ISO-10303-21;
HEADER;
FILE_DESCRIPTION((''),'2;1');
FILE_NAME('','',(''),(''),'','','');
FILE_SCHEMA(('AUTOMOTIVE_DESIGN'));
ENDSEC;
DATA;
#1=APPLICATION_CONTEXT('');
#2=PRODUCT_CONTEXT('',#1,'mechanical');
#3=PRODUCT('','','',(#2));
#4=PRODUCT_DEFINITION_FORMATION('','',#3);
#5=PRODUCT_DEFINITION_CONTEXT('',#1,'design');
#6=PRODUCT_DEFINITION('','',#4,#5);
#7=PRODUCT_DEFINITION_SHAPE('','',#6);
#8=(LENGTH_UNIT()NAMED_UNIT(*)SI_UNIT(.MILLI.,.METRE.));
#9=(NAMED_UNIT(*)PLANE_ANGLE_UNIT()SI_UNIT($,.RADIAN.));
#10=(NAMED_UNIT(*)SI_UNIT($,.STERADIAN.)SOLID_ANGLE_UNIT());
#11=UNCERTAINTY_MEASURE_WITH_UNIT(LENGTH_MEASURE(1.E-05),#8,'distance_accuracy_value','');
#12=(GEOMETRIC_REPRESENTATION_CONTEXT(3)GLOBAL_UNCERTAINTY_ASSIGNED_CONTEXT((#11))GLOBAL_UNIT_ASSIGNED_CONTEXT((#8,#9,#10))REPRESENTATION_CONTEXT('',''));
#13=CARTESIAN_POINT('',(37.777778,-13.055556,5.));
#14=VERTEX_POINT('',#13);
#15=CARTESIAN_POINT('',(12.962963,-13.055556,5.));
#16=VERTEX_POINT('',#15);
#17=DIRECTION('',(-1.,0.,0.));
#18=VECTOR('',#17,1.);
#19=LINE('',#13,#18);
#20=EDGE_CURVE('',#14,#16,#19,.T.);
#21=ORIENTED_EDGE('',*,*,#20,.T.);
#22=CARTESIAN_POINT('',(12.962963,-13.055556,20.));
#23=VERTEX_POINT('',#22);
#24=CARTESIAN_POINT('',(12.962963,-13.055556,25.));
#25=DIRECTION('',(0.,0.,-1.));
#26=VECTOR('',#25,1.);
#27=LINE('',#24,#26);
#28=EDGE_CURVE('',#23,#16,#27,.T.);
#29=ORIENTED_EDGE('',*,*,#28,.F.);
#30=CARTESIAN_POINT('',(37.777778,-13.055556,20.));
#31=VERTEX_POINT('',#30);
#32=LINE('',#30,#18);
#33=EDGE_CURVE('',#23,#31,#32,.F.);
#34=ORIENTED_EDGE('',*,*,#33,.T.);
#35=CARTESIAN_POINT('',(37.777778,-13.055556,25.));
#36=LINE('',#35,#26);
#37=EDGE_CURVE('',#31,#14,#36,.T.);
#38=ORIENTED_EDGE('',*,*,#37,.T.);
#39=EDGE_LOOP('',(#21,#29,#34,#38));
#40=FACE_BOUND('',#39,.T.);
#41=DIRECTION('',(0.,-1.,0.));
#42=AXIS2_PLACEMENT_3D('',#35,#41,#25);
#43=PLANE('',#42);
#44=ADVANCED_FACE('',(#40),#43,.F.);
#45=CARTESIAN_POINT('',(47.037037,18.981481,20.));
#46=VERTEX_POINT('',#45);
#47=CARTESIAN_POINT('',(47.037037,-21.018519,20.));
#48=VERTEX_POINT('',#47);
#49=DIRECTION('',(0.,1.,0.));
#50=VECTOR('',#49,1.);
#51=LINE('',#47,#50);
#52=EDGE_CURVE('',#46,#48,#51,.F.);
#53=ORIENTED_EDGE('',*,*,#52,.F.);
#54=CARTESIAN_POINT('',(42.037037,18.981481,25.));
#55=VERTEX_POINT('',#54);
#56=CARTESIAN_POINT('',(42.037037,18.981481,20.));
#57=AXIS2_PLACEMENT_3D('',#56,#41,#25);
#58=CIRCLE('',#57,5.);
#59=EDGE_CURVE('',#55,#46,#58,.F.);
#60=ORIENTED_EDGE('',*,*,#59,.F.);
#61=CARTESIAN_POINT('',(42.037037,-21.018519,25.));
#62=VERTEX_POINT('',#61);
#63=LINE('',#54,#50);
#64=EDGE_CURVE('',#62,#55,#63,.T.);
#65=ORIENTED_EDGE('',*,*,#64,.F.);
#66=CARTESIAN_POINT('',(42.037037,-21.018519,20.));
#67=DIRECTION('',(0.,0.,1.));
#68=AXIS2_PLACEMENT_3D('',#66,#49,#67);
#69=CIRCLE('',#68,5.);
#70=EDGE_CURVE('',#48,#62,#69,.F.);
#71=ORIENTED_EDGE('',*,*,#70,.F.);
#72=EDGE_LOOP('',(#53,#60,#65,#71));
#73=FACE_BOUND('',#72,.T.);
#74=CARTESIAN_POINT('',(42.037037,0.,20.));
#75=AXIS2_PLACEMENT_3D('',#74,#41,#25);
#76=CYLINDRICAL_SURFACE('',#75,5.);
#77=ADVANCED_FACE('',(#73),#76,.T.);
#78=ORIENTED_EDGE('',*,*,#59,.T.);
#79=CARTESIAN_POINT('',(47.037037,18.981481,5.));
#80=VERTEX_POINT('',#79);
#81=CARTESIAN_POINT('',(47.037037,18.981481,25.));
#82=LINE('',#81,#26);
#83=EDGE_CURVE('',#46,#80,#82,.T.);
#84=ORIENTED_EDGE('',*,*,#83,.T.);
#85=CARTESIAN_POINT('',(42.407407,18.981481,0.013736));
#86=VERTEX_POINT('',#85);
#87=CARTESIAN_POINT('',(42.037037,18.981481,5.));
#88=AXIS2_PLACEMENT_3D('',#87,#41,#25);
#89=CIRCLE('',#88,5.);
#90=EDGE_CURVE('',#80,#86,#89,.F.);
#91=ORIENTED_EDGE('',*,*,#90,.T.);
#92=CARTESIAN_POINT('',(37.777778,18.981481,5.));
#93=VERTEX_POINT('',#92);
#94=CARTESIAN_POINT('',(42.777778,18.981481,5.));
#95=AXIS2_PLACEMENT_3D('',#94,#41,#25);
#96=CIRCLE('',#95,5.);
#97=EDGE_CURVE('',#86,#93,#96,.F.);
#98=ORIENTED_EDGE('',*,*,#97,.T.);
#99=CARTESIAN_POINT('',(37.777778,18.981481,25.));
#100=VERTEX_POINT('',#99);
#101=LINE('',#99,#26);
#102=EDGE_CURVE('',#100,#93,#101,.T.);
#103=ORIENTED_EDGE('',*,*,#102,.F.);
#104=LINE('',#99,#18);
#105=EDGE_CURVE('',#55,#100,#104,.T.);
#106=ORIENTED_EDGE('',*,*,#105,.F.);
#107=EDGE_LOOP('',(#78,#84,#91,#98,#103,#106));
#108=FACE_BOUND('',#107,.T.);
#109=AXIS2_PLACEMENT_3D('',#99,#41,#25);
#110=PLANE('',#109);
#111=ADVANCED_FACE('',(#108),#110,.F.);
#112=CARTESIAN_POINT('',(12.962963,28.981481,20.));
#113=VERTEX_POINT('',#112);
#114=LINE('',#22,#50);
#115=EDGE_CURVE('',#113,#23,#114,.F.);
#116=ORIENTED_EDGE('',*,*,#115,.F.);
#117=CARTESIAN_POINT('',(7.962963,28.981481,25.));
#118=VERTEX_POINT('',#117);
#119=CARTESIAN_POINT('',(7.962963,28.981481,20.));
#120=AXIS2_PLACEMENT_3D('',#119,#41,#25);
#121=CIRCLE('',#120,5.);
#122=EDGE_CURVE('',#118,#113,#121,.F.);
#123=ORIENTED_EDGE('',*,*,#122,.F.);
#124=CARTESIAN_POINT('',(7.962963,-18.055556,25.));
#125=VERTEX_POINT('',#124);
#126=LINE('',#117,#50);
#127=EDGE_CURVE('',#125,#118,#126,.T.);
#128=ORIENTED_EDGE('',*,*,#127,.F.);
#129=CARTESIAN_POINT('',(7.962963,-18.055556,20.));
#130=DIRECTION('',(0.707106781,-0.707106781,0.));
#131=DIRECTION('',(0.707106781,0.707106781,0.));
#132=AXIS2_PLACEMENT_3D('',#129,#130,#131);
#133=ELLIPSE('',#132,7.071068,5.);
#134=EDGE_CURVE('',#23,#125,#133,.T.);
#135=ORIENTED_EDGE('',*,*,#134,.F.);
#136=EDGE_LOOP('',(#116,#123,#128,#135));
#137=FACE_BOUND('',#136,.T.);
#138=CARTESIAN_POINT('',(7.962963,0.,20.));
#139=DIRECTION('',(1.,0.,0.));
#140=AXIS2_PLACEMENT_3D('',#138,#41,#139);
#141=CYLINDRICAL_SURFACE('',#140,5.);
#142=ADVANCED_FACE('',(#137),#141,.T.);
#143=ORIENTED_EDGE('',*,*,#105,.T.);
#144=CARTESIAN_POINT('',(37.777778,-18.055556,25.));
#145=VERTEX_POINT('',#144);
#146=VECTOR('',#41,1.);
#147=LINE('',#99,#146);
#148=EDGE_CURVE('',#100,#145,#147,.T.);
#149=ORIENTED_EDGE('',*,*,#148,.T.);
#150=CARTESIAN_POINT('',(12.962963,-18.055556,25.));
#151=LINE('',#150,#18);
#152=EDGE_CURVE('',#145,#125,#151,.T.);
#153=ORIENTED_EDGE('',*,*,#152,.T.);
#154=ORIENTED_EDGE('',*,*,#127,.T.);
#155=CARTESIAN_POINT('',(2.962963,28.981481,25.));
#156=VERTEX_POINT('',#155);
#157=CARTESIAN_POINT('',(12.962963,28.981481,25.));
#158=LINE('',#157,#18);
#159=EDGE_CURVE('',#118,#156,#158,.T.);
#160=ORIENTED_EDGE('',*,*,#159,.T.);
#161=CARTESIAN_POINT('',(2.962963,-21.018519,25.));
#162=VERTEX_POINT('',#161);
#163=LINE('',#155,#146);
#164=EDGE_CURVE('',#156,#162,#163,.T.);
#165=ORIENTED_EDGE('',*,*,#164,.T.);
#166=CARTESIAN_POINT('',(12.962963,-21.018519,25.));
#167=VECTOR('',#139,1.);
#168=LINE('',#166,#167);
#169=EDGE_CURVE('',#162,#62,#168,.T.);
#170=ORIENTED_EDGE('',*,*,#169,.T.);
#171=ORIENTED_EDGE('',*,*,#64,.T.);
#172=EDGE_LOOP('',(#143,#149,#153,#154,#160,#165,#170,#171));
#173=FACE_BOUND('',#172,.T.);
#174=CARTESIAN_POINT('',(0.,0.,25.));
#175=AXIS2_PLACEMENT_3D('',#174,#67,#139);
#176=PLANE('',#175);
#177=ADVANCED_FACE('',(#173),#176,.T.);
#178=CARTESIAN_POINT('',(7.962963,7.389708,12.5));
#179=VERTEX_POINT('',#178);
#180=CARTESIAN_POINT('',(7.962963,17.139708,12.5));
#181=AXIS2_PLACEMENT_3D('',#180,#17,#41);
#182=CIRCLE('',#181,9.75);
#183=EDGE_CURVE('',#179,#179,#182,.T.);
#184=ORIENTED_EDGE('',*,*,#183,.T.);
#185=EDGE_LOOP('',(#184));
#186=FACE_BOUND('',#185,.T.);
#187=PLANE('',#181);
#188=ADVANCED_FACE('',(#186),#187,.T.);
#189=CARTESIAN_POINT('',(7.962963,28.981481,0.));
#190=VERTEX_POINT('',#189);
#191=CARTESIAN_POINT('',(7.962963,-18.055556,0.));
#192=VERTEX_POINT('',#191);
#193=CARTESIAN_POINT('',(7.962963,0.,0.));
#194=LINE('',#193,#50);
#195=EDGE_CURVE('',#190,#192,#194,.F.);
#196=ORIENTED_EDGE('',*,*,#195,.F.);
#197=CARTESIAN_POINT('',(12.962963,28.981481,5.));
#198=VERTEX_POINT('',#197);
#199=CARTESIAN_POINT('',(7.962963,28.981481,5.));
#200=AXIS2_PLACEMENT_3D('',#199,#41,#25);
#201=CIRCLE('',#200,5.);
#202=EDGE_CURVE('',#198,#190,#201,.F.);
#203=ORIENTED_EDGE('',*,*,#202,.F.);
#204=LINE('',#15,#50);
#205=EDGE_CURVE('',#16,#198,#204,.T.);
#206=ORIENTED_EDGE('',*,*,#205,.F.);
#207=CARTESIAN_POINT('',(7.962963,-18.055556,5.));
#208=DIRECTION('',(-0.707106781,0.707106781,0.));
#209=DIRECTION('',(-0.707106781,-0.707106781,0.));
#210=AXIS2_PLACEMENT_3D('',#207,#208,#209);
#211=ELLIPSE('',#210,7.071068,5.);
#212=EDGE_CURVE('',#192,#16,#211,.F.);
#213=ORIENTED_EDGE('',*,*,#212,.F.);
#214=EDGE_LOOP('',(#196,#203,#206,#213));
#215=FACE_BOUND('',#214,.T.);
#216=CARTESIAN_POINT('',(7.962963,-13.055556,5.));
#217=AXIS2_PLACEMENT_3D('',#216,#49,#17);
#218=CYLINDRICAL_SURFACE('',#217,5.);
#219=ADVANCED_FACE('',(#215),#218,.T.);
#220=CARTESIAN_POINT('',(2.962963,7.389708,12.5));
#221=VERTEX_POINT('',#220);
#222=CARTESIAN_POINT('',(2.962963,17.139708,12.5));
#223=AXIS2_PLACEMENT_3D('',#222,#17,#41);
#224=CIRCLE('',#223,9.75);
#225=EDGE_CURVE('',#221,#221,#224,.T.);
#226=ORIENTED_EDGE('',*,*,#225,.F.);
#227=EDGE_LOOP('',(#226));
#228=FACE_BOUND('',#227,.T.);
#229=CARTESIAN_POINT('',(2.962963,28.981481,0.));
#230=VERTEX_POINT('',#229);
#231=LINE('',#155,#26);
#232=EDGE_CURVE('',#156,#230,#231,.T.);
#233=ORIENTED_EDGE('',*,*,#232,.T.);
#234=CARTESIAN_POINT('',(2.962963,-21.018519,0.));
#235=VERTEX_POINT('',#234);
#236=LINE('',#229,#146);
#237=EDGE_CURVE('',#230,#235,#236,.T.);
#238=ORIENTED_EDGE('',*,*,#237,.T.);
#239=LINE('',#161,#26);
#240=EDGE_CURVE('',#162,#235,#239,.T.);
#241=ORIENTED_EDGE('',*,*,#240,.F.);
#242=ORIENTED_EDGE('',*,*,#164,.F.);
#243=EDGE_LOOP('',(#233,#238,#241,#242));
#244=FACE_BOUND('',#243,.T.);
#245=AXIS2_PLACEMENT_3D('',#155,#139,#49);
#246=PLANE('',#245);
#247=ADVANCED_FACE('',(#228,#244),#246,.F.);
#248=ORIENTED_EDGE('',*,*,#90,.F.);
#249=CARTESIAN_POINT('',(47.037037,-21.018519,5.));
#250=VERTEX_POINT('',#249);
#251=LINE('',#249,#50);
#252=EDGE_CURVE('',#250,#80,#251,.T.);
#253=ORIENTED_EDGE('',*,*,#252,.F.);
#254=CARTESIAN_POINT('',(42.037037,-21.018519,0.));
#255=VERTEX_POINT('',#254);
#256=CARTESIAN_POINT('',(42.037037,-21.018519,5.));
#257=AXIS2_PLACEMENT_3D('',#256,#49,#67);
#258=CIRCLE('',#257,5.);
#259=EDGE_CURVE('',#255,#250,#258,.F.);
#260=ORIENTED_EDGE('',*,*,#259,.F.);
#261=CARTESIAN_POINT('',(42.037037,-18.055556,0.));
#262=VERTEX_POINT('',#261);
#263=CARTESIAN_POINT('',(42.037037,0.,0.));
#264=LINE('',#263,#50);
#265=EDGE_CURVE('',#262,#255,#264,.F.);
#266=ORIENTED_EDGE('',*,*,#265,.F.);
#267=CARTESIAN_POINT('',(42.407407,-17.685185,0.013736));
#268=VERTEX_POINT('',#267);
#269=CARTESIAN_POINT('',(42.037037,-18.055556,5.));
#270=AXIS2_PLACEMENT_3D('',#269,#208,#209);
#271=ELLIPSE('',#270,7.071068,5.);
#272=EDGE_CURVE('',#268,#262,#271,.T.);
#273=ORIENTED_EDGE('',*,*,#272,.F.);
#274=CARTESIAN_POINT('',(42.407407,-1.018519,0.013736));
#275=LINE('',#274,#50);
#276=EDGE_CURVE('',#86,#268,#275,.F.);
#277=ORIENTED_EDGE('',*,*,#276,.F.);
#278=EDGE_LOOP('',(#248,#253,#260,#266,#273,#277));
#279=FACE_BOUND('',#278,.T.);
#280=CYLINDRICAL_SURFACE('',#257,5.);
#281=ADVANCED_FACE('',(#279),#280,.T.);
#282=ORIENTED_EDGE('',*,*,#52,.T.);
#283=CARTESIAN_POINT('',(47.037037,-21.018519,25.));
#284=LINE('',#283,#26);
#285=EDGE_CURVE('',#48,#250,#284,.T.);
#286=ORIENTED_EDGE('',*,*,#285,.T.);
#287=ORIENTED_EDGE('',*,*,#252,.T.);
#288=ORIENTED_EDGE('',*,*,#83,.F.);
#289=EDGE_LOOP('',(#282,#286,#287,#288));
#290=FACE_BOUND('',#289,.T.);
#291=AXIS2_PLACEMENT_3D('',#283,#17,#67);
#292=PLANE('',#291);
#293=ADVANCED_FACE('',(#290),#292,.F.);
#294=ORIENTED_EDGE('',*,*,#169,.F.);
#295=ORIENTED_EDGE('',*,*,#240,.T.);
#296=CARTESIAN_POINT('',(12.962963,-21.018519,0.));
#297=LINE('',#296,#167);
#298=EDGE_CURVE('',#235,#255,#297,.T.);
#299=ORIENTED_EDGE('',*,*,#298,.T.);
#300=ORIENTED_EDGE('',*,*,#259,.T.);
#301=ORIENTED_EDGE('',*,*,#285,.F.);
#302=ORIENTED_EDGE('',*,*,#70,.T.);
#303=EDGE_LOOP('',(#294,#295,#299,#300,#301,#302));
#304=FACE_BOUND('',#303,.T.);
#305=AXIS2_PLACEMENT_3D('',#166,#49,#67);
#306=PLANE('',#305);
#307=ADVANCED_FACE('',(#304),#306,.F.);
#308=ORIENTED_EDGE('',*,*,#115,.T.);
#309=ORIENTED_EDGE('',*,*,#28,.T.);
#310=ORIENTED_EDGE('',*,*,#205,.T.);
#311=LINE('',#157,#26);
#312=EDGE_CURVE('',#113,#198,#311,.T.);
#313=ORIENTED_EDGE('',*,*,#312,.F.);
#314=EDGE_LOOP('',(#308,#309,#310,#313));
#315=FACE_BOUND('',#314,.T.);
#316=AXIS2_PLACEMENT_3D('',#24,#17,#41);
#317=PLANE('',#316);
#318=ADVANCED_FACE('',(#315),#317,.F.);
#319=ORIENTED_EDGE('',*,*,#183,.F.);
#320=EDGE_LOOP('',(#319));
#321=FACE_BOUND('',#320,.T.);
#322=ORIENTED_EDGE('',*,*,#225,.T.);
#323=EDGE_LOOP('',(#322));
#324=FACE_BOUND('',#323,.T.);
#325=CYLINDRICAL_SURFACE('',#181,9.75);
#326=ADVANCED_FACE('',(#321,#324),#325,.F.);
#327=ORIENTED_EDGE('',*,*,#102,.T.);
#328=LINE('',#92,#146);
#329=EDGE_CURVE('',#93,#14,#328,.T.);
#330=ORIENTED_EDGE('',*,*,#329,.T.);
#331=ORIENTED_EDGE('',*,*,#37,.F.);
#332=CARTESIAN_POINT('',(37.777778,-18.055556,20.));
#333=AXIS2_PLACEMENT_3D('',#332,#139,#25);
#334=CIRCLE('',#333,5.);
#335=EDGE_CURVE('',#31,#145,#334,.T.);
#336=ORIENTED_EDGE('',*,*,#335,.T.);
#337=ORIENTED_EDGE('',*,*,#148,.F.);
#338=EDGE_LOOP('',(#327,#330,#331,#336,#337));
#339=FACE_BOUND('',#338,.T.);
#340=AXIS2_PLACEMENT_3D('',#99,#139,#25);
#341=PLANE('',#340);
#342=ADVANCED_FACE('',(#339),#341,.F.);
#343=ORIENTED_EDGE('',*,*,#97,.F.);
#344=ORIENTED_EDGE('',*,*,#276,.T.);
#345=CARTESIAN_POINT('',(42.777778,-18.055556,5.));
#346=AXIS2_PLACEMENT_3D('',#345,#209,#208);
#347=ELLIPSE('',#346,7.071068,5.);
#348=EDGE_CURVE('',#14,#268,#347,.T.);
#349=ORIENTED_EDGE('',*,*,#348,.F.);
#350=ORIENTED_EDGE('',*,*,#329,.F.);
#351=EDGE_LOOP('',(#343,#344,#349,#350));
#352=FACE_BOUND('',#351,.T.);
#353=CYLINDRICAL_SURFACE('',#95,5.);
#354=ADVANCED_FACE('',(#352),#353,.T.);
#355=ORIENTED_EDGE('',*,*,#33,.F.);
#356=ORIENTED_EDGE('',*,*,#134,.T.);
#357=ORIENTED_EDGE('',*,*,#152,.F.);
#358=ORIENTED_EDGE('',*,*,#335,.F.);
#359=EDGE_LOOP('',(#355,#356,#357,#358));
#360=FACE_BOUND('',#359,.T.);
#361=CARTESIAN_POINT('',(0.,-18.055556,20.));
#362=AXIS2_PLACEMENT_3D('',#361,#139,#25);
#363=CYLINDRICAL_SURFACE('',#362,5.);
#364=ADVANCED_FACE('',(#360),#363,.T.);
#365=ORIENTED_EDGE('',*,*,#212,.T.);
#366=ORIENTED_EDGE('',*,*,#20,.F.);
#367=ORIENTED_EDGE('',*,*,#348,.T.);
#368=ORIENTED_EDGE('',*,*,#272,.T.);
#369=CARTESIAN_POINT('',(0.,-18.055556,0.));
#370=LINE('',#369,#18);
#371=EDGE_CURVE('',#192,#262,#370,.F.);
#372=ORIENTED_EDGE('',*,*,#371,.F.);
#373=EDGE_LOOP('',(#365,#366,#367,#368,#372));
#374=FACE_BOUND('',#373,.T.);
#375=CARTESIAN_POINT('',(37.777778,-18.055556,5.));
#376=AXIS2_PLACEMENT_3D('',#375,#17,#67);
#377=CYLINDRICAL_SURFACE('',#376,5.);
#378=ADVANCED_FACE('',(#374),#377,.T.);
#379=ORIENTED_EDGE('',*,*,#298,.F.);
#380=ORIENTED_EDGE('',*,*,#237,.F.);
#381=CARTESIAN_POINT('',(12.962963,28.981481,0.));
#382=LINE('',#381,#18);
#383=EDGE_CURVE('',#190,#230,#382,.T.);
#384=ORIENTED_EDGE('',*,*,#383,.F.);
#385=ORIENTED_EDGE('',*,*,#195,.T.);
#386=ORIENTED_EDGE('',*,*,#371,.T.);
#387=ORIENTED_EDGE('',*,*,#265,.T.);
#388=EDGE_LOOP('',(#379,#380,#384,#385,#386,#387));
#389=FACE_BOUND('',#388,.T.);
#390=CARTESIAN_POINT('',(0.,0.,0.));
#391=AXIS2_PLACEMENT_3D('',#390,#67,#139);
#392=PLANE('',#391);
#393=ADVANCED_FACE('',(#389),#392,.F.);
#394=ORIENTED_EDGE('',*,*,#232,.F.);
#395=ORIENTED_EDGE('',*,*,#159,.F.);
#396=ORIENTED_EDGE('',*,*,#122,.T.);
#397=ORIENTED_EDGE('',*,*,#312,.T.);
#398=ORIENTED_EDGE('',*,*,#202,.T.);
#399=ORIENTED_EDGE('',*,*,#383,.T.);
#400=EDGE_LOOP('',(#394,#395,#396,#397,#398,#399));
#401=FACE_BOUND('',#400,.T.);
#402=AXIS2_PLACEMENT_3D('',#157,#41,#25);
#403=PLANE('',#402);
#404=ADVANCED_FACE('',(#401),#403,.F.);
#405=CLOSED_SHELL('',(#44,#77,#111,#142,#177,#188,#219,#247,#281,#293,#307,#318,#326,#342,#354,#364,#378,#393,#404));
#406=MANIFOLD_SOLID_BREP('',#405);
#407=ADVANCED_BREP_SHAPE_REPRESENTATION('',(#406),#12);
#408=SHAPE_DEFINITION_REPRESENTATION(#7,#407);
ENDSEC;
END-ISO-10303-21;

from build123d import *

# Parameters (mm, degrees)
EXTRUDE_1_DEPTH     = 25
SKETCH_2_R          = 9.75
CUT_EXTRUDE_1_DEPTH = 5
FILLET_2_R          = 5


with BuildPart() as part:
    # 草圖1 → 填料-伸長1 (new body)
    with BuildSketch(Plane.XY):
        Polygon((12.962962963, -21.018518519), (47.037037037, -21.018518519), (47.037037037, 18.981481481), (37.777777778, 18.981481481), (37.777777778, -13.055555556), (12.962962963, -13.055555556), (12.962962963, 28.981481481), (2.962962963, 28.981481481), (2.962962963, -21.018518519), align=None)
    extrude(amount=EXTRUDE_1_DEPTH)

    # 草圖2 → 除料-伸長1 (cut)
    with BuildSketch(Plane.ZY.offset(-2.962962963)):
        with Locations(Location((12.5, 17.139708428, 0), (0, 0, 270))):
            Circle(SKETCH_2_R)
    extrude(amount=-CUT_EXTRUDE_1_DEPTH, mode=Mode.SUBTRACT)

    # 圓角2
    # the kernel refuses this fillet: 5 mm, written as the material it takes off along each edge
    with BuildSketch(Plane(origin=(47.037037037, -33.518518519, 25), x_dir=(0, 0, -1), z_dir=(0, 1, 0))) as fillet_2_piece_1:
        with BuildLine():
            CenterArc((FILLET_2_R, FILLET_2_R), FILLET_2_R, 180, 90)
            Line((0, FILLET_2_R), (0, 0))
            Line((0, 0), (FILLET_2_R, 0))
        make_face()
    extrude(amount=65, mode=Mode.SUBTRACT)
    with BuildSketch(Plane(origin=(47.037037037, -33.518518519, 0), x_dir=(0, 0, 1), z_dir=(0, 1, 0))) as fillet_2_piece_2:
        with BuildLine():
            CenterArc((FILLET_2_R, -FILLET_2_R), FILLET_2_R, 90, 90)
            Line((0, -FILLET_2_R), (0, 0))
            Line((0, 0), (FILLET_2_R, 0))
        make_face()
    extrude(amount=65, mode=Mode.SUBTRACT)
    with BuildSketch(Plane(origin=(37.777777778, 31.481481481, 0), x_dir=(1, 0, 0), z_dir=(0, -1, 0))) as fillet_2_piece_3:
        with BuildLine():
            CenterArc((FILLET_2_R, FILLET_2_R), FILLET_2_R, 180, 90)
            Line((0, FILLET_2_R), (0, 0))
            Line((0, 0), (FILLET_2_R, 0))
        make_face()
    extrude(amount=44.537037037, mode=Mode.SUBTRACT)
    with BuildSketch(Plane(origin=(12.962962963, -13.055555556, 25), x_dir=(-1, 0, 0), z_dir=(0, 1, 0))) as fillet_2_piece_4:
        with BuildLine():
            CenterArc((FILLET_2_R, -FILLET_2_R), FILLET_2_R, 90, 90)
            Line((0, -FILLET_2_R), (0, 0))
            Line((0, 0), (FILLET_2_R, 0))
        make_face()
    extrude(amount=54.537037037, mode=Mode.SUBTRACT)
    with BuildSketch(Plane(origin=(12.962962963, -13.055555556, 0), x_dir=(-1, 0, 0), z_dir=(0, 1, 0))) as fillet_2_piece_5:
        with BuildLine():
            CenterArc((FILLET_2_R, FILLET_2_R), FILLET_2_R, 180, 90)
            Line((0, FILLET_2_R), (0, 0))
            Line((0, 0), (FILLET_2_R, 0))
        make_face()
    extrude(amount=54.537037037, mode=Mode.SUBTRACT)
    with BuildSketch(Plane(origin=(37.777777778, -13.055555556, 25), x_dir=(0, -1, 0), z_dir=(-1, 0, 0))) as fillet_2_piece_6:
        with BuildLine():
            CenterArc((FILLET_2_R, -FILLET_2_R), FILLET_2_R, 90, 90)
            Line((0, -FILLET_2_R), (0, 0))
            Line((0, 0), (FILLET_2_R, 0))
        make_face()
    extrude(amount=24.814814815, mode=Mode.SUBTRACT)
    with BuildSketch(Plane(origin=(37.777777778, -13.055555556, 0), x_dir=(0, -1, 0), z_dir=(-1, 0, 0))) as fillet_2_piece_7:
        with BuildLine():
            CenterArc((FILLET_2_R, FILLET_2_R), FILLET_2_R, 180, 90)
            Line((0, FILLET_2_R), (0, 0))
            Line((0, 0), (FILLET_2_R, 0))
        make_face()
    extrude(amount=24.814814815, mode=Mode.SUBTRACT)
    with BuildSketch(Plane(origin=(37.777777778, 31.481481481, 0), x_dir=(1, 0, 0), z_dir=(0, -1, 0))) as fillet_2_piece_8a_section:
        with BuildLine():
            CenterArc((FILLET_2_R, FILLET_2_R), FILLET_2_R, 180, 90)
            Line((0, FILLET_2_R), (0, 0))
            Line((0, 0), (FILLET_2_R, 0))
        make_face()
    fillet_2_piece_8a = extrude(amount=57.037037037, mode=Mode.PRIVATE)
    fillet_2_piece_8a = split(fillet_2_piece_8a, bisect_by=Plane(origin=(38.909753349, -13.055555556, 1.131975571), z_dir=(0, -1, 0)), keep=Keep.TOP, mode=Mode.PRIVATE)
    with BuildSketch(Plane(origin=(50.277777778, -13.055555556, 0), x_dir=(0, -1, 0), z_dir=(-1, 0, 0))) as fillet_2_piece_8b_section:
        with BuildLine():
            CenterArc((FILLET_2_R, FILLET_2_R), FILLET_2_R, 180, 90)
            Line((0, FILLET_2_R), (0, 0))
            Line((0, 0), (FILLET_2_R, 0))
        make_face()
    fillet_2_piece_8b = extrude(amount=37.314814815, mode=Mode.PRIVATE)
    fillet_2_piece_8b = split(fillet_2_piece_8b, bisect_by=Plane(origin=(37.777777778, -14.187531127, 1.131975571), z_dir=(1, 0, 0)), keep=Keep.TOP, mode=Mode.PRIVATE)
    fillet_2_piece_8 = fillet_2_piece_8a & fillet_2_piece_8b
    add(fillet_2_piece_8, mode=Mode.SUBTRACT)
    with BuildSketch(Plane(origin=(37.777777778, -13.055555556, 25), x_dir=(0, -1, 0), z_dir=(-1, 0, 0))) as fillet_2_piece_9a_section:
        with BuildLine():
            CenterArc((FILLET_2_R, -FILLET_2_R), FILLET_2_R, 90, 90)
            Line((0, -FILLET_2_R), (0, 0))
            Line((0, 0), (FILLET_2_R, 0))
        make_face()
    fillet_2_piece_9a = extrude(amount=37.314814815, mode=Mode.PRIVATE)
    fillet_2_piece_9a = split(fillet_2_piece_9a, bisect_by=Plane(origin=(12.962962963, -14.187531127, 23.868024429), z_dir=(-1, 0, 0)), keep=Keep.TOP, mode=Mode.PRIVATE)
    with BuildSketch(Plane(origin=(12.962962963, -25.555555556, 25), x_dir=(-1, 0, 0), z_dir=(0, 1, 0))) as fillet_2_piece_9b_section:
        with BuildLine():
            CenterArc((FILLET_2_R, -FILLET_2_R), FILLET_2_R, 90, 90)
            Line((0, -FILLET_2_R), (0, 0))
            Line((0, 0), (FILLET_2_R, 0))
        make_face()
    fillet_2_piece_9b = extrude(amount=67.037037037, mode=Mode.PRIVATE)
    fillet_2_piece_9b = split(fillet_2_piece_9b, bisect_by=Plane(origin=(11.830987392, -13.055555556, 23.868024429), z_dir=(0, -1, 0)), keep=Keep.TOP, mode=Mode.PRIVATE)
    fillet_2_piece_9 = fillet_2_piece_9a & fillet_2_piece_9b
    add(fillet_2_piece_9, mode=Mode.SUBTRACT)
    with BuildSketch(Plane(origin=(37.777777778, -13.055555556, 0), x_dir=(0, -1, 0), z_dir=(-1, 0, 0))) as fillet_2_piece_10a_section:
        with BuildLine():
            CenterArc((FILLET_2_R, FILLET_2_R), FILLET_2_R, 180, 90)
            Line((0, FILLET_2_R), (0, 0))
            Line((0, 0), (FILLET_2_R, 0))
        make_face()
    fillet_2_piece_10a = extrude(amount=37.314814815, mode=Mode.PRIVATE)
    fillet_2_piece_10a = split(fillet_2_piece_10a, bisect_by=Plane(origin=(12.962962963, -14.187531127, 1.131975571), z_dir=(-1, 0, 0)), keep=Keep.TOP, mode=Mode.PRIVATE)
    with BuildSketch(Plane(origin=(12.962962963, -25.555555556, 0), x_dir=(-1, 0, 0), z_dir=(0, 1, 0))) as fillet_2_piece_10b_section:
        with BuildLine():
            CenterArc((FILLET_2_R, FILLET_2_R), FILLET_2_R, 180, 90)
            Line((0, FILLET_2_R), (0, 0))
            Line((0, 0), (FILLET_2_R, 0))
        make_face()
    fillet_2_piece_10b = extrude(amount=67.037037037, mode=Mode.PRIVATE)
    fillet_2_piece_10b = split(fillet_2_piece_10b, bisect_by=Plane(origin=(11.830987392, -13.055555556, 1.131975571), z_dir=(0, -1, 0)), keep=Keep.TOP, mode=Mode.PRIVATE)
    fillet_2_piece_10 = fillet_2_piece_10a & fillet_2_piece_10b
    add(fillet_2_piece_10, mode=Mode.SUBTRACT)


solid = part.part
